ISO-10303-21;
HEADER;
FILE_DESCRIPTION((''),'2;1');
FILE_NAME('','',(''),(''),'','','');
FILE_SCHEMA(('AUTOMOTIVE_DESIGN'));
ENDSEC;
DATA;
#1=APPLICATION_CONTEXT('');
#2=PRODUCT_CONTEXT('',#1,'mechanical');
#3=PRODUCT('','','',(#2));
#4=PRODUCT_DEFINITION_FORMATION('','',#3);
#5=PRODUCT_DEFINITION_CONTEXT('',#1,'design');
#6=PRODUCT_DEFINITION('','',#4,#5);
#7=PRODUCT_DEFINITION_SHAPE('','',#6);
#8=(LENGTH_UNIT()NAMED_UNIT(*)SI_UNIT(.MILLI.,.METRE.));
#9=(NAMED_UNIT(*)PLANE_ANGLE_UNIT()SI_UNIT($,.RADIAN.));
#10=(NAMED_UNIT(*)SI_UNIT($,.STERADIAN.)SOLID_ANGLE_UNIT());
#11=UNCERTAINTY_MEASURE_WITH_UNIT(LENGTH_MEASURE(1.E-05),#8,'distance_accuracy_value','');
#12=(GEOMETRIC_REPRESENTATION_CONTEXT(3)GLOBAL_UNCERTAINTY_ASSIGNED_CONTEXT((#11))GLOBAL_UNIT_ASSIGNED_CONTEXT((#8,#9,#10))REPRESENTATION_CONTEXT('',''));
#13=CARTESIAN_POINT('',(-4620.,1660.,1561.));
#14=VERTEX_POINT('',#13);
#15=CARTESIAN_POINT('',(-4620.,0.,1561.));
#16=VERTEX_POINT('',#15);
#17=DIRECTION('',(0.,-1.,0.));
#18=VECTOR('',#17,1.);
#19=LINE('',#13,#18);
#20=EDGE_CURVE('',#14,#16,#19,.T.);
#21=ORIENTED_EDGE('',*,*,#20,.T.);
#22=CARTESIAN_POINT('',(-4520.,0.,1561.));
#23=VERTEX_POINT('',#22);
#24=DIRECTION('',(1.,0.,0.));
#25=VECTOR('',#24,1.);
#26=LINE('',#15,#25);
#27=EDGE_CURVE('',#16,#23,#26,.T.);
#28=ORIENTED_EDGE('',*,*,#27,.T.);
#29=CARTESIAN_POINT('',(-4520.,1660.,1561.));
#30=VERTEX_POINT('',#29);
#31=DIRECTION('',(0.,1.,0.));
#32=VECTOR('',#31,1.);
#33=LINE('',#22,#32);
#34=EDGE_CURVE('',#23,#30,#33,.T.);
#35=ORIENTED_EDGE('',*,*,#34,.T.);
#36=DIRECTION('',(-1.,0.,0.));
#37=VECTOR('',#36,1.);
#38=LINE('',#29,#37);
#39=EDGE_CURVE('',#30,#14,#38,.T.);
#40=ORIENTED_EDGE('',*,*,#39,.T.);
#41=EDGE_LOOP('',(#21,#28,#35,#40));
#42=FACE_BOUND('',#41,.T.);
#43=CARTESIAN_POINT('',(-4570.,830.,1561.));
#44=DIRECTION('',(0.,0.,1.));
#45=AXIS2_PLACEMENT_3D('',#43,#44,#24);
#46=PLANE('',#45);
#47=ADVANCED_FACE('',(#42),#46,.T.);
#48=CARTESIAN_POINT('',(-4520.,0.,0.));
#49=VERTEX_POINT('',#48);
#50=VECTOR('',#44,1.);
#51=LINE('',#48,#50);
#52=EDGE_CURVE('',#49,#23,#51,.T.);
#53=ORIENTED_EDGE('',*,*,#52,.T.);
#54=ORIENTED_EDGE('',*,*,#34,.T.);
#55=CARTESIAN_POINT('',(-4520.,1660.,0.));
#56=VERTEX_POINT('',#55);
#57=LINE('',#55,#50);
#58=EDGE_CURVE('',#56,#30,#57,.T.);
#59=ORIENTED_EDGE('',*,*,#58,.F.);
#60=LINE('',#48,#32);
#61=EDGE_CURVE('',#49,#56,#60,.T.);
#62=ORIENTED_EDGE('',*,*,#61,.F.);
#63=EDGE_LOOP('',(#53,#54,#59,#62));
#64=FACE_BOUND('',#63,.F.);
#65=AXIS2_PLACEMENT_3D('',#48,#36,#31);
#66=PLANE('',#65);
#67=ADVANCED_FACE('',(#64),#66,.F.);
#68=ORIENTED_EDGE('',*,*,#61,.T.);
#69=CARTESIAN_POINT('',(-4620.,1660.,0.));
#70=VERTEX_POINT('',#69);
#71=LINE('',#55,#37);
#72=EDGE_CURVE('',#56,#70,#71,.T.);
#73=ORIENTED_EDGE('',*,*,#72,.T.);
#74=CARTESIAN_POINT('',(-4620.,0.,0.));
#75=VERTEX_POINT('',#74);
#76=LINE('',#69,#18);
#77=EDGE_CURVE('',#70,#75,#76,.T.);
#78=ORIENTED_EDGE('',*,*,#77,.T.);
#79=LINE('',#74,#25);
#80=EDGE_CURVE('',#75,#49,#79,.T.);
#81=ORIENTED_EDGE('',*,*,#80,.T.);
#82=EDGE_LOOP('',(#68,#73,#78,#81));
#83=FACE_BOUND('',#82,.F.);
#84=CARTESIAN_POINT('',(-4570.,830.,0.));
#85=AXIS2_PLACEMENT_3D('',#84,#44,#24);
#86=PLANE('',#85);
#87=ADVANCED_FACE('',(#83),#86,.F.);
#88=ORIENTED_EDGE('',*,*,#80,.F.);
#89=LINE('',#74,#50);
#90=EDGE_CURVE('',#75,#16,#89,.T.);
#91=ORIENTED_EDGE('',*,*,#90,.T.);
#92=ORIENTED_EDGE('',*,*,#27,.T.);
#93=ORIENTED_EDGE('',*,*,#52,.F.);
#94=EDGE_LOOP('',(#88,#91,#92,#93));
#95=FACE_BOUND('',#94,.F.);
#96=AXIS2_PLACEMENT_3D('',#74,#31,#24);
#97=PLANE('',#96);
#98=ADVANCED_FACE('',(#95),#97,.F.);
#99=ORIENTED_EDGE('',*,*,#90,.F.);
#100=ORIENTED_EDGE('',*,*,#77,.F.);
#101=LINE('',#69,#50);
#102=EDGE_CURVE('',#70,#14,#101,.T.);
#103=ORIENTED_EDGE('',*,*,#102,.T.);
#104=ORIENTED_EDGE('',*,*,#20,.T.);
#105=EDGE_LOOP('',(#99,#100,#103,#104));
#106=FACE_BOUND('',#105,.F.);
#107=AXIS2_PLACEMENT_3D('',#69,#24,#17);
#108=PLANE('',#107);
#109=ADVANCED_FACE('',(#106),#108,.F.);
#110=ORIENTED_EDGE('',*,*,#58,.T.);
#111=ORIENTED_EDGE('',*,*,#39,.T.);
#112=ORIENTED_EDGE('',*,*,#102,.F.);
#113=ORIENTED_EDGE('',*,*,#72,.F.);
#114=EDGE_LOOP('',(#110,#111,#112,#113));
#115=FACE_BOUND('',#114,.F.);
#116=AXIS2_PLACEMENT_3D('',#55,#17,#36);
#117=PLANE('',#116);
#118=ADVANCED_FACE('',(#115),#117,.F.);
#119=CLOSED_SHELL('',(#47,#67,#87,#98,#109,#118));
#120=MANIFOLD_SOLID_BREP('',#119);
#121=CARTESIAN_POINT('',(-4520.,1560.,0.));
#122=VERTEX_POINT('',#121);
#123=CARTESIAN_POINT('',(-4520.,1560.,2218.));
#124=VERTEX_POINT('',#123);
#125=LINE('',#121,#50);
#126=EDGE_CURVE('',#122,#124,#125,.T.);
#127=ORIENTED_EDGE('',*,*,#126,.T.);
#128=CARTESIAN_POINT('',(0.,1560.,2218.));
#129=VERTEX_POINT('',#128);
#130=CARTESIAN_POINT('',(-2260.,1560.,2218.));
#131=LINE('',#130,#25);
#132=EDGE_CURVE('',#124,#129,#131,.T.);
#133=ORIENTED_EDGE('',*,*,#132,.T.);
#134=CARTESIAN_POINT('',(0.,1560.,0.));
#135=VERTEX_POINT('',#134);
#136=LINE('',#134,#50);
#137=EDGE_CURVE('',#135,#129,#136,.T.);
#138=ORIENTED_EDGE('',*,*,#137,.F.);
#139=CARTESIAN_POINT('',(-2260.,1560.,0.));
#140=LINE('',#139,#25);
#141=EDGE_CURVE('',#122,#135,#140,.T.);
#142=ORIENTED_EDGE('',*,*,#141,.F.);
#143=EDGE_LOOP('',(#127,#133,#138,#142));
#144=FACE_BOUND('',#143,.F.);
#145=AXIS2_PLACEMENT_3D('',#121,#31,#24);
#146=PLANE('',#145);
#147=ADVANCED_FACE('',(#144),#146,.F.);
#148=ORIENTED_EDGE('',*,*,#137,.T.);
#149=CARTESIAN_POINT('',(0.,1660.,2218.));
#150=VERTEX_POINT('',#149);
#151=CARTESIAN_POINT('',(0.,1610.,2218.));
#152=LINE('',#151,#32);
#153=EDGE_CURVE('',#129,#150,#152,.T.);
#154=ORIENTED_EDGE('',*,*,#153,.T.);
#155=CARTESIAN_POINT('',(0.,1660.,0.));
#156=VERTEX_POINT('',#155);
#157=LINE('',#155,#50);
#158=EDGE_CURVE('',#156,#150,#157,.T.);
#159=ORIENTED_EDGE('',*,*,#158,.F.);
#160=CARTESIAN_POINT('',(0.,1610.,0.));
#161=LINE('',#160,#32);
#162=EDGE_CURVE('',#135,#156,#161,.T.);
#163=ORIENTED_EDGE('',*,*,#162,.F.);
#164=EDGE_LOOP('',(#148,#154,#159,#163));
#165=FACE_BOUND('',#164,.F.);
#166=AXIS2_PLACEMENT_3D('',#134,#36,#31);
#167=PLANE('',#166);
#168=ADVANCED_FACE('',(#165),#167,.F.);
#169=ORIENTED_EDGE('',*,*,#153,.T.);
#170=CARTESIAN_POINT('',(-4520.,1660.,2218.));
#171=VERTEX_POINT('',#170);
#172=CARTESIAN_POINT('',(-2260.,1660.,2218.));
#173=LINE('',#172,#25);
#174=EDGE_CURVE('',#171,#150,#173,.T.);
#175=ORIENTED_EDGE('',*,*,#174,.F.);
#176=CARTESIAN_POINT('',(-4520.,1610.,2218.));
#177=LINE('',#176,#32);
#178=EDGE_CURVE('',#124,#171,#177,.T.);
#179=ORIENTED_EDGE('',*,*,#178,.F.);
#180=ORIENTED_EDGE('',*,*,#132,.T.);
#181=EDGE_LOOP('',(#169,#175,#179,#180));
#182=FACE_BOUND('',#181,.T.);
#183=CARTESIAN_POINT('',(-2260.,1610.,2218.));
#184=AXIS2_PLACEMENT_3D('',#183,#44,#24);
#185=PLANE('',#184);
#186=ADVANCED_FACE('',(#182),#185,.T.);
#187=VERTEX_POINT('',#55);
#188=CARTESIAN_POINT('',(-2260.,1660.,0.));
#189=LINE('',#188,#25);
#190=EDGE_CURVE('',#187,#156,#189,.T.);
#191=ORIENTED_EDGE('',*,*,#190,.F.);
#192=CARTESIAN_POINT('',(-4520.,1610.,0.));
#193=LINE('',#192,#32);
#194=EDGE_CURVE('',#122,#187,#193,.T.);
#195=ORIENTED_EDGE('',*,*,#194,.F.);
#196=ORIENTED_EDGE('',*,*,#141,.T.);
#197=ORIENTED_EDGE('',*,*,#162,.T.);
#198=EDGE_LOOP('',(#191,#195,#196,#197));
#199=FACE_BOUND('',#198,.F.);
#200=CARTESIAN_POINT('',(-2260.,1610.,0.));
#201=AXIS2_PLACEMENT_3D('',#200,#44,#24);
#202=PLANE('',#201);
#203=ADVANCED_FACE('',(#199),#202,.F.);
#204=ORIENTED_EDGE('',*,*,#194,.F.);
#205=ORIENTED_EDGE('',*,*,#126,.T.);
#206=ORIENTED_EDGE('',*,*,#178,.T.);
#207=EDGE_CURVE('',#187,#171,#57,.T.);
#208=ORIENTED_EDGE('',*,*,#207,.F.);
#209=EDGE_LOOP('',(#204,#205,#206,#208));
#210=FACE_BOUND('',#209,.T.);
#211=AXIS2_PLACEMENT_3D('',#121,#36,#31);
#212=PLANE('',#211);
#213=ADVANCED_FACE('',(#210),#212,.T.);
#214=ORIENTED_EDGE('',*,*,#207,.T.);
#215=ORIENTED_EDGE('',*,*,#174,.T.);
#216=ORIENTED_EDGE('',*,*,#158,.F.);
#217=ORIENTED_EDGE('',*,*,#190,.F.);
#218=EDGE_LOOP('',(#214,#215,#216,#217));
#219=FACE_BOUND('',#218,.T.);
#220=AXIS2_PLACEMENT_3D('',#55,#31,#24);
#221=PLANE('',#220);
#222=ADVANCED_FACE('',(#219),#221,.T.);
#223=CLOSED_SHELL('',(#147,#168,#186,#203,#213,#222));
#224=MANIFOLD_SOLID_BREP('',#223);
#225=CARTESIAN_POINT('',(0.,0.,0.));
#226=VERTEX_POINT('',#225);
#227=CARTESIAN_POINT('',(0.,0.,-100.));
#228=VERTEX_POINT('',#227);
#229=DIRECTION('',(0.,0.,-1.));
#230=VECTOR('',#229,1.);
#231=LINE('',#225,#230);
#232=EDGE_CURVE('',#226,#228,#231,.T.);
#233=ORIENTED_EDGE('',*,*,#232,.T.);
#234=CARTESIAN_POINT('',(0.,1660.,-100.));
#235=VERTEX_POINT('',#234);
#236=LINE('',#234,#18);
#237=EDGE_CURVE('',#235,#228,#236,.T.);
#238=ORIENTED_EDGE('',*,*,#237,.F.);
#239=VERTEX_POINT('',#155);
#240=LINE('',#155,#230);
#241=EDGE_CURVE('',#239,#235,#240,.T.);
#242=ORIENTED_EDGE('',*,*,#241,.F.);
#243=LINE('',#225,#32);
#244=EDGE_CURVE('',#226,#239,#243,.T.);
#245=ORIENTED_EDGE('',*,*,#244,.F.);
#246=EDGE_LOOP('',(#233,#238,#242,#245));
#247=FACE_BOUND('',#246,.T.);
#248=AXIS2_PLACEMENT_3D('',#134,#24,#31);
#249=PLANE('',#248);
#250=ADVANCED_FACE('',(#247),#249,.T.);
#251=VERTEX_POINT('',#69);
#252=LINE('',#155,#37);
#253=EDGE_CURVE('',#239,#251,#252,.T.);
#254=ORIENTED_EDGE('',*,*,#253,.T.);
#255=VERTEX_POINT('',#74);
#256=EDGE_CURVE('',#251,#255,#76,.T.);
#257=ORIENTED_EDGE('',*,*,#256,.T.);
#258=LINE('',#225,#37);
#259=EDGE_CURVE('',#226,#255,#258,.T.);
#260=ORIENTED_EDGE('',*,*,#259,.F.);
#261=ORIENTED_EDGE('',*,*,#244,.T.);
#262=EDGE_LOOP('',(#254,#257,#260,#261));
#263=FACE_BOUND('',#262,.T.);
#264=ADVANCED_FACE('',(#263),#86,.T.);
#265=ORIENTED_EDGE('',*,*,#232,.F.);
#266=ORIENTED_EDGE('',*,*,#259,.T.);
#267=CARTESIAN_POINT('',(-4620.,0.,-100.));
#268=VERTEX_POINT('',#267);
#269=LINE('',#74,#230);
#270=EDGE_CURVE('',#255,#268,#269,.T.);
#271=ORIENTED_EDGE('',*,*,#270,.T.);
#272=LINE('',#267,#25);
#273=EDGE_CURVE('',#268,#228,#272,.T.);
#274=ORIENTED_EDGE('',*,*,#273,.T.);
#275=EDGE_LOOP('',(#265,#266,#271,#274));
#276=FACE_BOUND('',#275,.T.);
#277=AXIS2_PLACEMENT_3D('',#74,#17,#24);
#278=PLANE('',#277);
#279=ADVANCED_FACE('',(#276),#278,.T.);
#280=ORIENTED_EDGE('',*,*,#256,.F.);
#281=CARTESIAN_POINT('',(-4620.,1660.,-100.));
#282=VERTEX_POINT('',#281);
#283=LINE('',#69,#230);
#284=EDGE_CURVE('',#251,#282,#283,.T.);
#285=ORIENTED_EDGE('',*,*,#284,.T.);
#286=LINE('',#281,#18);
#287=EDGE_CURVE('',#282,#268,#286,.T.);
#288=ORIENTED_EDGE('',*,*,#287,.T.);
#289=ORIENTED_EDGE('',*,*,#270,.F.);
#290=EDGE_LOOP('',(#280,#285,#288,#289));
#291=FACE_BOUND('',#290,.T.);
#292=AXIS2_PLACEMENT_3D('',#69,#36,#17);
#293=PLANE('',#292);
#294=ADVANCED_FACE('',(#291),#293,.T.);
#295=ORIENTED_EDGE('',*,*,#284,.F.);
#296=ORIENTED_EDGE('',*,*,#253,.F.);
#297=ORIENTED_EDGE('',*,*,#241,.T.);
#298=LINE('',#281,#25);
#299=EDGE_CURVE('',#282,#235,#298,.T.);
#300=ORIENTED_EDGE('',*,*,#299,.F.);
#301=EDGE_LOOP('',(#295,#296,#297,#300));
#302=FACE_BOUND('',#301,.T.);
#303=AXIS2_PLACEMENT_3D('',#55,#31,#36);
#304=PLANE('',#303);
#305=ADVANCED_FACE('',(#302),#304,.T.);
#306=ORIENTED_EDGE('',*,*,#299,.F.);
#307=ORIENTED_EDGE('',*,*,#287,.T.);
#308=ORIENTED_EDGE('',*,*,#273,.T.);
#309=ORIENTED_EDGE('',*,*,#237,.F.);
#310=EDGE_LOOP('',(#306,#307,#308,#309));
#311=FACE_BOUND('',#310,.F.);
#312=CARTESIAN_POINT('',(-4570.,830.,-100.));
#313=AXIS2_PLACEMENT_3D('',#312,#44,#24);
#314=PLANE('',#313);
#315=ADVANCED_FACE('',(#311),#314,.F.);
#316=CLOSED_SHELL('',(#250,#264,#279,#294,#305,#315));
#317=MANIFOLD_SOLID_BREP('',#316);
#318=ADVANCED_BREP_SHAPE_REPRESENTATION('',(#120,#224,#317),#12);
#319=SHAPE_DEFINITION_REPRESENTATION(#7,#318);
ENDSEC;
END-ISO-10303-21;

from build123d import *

# Parameters (mm, degrees)
F0_W     = 4520
F0_H     = 1560
F1_DEPTH = 100
F0_H_2   = 100
F2_DEPTH = 2218
F3_DEPTH = 100
F4_DEPTH = 1561
F5_DEPTH = 100


with BuildPart() as f1:
    # F0 (on Top) → F1 (new body)
    with BuildSketch(Plane.XY):
        with Locations((-2260, 780)):
            Rectangle(F0_W, F0_H)
    extrude(amount=-F1_DEPTH)

    # F0 (on Top) → F3 (join)
    with BuildSketch(Plane.XY):
        with Locations((-2260, 1610)):
            Rectangle(F0_W, F0_H_2)
    extrude(amount=-F3_DEPTH)

    # F0 (on Top) → F5 (join)
    with BuildSketch(Plane.XY):
        Polygon((-4620, 0), (-4520, 0), (-4520, 1560), (-4520, 1660), (-4620, 1660), align=None)
    extrude(amount=-F5_DEPTH)


with BuildPart() as f2:
    # F0 (on Top) → F2 (new body)
    with BuildSketch(Plane.XY):
        with Locations((-2260, 1610)):
            Rectangle(F0_W, F0_H_2)
    extrude(amount=F2_DEPTH)


with BuildPart() as f4:
    # F0 (on Top) → F4 (new body)
    with BuildSketch(Plane.XY):
        Polygon((-4620, 0), (-4520, 0), (-4520, 1560), (-4520, 1660), (-4620, 1660), align=None)
    extrude(amount=F4_DEPTH)


solid = Compound([f1.part, f2.part, f4.part])
